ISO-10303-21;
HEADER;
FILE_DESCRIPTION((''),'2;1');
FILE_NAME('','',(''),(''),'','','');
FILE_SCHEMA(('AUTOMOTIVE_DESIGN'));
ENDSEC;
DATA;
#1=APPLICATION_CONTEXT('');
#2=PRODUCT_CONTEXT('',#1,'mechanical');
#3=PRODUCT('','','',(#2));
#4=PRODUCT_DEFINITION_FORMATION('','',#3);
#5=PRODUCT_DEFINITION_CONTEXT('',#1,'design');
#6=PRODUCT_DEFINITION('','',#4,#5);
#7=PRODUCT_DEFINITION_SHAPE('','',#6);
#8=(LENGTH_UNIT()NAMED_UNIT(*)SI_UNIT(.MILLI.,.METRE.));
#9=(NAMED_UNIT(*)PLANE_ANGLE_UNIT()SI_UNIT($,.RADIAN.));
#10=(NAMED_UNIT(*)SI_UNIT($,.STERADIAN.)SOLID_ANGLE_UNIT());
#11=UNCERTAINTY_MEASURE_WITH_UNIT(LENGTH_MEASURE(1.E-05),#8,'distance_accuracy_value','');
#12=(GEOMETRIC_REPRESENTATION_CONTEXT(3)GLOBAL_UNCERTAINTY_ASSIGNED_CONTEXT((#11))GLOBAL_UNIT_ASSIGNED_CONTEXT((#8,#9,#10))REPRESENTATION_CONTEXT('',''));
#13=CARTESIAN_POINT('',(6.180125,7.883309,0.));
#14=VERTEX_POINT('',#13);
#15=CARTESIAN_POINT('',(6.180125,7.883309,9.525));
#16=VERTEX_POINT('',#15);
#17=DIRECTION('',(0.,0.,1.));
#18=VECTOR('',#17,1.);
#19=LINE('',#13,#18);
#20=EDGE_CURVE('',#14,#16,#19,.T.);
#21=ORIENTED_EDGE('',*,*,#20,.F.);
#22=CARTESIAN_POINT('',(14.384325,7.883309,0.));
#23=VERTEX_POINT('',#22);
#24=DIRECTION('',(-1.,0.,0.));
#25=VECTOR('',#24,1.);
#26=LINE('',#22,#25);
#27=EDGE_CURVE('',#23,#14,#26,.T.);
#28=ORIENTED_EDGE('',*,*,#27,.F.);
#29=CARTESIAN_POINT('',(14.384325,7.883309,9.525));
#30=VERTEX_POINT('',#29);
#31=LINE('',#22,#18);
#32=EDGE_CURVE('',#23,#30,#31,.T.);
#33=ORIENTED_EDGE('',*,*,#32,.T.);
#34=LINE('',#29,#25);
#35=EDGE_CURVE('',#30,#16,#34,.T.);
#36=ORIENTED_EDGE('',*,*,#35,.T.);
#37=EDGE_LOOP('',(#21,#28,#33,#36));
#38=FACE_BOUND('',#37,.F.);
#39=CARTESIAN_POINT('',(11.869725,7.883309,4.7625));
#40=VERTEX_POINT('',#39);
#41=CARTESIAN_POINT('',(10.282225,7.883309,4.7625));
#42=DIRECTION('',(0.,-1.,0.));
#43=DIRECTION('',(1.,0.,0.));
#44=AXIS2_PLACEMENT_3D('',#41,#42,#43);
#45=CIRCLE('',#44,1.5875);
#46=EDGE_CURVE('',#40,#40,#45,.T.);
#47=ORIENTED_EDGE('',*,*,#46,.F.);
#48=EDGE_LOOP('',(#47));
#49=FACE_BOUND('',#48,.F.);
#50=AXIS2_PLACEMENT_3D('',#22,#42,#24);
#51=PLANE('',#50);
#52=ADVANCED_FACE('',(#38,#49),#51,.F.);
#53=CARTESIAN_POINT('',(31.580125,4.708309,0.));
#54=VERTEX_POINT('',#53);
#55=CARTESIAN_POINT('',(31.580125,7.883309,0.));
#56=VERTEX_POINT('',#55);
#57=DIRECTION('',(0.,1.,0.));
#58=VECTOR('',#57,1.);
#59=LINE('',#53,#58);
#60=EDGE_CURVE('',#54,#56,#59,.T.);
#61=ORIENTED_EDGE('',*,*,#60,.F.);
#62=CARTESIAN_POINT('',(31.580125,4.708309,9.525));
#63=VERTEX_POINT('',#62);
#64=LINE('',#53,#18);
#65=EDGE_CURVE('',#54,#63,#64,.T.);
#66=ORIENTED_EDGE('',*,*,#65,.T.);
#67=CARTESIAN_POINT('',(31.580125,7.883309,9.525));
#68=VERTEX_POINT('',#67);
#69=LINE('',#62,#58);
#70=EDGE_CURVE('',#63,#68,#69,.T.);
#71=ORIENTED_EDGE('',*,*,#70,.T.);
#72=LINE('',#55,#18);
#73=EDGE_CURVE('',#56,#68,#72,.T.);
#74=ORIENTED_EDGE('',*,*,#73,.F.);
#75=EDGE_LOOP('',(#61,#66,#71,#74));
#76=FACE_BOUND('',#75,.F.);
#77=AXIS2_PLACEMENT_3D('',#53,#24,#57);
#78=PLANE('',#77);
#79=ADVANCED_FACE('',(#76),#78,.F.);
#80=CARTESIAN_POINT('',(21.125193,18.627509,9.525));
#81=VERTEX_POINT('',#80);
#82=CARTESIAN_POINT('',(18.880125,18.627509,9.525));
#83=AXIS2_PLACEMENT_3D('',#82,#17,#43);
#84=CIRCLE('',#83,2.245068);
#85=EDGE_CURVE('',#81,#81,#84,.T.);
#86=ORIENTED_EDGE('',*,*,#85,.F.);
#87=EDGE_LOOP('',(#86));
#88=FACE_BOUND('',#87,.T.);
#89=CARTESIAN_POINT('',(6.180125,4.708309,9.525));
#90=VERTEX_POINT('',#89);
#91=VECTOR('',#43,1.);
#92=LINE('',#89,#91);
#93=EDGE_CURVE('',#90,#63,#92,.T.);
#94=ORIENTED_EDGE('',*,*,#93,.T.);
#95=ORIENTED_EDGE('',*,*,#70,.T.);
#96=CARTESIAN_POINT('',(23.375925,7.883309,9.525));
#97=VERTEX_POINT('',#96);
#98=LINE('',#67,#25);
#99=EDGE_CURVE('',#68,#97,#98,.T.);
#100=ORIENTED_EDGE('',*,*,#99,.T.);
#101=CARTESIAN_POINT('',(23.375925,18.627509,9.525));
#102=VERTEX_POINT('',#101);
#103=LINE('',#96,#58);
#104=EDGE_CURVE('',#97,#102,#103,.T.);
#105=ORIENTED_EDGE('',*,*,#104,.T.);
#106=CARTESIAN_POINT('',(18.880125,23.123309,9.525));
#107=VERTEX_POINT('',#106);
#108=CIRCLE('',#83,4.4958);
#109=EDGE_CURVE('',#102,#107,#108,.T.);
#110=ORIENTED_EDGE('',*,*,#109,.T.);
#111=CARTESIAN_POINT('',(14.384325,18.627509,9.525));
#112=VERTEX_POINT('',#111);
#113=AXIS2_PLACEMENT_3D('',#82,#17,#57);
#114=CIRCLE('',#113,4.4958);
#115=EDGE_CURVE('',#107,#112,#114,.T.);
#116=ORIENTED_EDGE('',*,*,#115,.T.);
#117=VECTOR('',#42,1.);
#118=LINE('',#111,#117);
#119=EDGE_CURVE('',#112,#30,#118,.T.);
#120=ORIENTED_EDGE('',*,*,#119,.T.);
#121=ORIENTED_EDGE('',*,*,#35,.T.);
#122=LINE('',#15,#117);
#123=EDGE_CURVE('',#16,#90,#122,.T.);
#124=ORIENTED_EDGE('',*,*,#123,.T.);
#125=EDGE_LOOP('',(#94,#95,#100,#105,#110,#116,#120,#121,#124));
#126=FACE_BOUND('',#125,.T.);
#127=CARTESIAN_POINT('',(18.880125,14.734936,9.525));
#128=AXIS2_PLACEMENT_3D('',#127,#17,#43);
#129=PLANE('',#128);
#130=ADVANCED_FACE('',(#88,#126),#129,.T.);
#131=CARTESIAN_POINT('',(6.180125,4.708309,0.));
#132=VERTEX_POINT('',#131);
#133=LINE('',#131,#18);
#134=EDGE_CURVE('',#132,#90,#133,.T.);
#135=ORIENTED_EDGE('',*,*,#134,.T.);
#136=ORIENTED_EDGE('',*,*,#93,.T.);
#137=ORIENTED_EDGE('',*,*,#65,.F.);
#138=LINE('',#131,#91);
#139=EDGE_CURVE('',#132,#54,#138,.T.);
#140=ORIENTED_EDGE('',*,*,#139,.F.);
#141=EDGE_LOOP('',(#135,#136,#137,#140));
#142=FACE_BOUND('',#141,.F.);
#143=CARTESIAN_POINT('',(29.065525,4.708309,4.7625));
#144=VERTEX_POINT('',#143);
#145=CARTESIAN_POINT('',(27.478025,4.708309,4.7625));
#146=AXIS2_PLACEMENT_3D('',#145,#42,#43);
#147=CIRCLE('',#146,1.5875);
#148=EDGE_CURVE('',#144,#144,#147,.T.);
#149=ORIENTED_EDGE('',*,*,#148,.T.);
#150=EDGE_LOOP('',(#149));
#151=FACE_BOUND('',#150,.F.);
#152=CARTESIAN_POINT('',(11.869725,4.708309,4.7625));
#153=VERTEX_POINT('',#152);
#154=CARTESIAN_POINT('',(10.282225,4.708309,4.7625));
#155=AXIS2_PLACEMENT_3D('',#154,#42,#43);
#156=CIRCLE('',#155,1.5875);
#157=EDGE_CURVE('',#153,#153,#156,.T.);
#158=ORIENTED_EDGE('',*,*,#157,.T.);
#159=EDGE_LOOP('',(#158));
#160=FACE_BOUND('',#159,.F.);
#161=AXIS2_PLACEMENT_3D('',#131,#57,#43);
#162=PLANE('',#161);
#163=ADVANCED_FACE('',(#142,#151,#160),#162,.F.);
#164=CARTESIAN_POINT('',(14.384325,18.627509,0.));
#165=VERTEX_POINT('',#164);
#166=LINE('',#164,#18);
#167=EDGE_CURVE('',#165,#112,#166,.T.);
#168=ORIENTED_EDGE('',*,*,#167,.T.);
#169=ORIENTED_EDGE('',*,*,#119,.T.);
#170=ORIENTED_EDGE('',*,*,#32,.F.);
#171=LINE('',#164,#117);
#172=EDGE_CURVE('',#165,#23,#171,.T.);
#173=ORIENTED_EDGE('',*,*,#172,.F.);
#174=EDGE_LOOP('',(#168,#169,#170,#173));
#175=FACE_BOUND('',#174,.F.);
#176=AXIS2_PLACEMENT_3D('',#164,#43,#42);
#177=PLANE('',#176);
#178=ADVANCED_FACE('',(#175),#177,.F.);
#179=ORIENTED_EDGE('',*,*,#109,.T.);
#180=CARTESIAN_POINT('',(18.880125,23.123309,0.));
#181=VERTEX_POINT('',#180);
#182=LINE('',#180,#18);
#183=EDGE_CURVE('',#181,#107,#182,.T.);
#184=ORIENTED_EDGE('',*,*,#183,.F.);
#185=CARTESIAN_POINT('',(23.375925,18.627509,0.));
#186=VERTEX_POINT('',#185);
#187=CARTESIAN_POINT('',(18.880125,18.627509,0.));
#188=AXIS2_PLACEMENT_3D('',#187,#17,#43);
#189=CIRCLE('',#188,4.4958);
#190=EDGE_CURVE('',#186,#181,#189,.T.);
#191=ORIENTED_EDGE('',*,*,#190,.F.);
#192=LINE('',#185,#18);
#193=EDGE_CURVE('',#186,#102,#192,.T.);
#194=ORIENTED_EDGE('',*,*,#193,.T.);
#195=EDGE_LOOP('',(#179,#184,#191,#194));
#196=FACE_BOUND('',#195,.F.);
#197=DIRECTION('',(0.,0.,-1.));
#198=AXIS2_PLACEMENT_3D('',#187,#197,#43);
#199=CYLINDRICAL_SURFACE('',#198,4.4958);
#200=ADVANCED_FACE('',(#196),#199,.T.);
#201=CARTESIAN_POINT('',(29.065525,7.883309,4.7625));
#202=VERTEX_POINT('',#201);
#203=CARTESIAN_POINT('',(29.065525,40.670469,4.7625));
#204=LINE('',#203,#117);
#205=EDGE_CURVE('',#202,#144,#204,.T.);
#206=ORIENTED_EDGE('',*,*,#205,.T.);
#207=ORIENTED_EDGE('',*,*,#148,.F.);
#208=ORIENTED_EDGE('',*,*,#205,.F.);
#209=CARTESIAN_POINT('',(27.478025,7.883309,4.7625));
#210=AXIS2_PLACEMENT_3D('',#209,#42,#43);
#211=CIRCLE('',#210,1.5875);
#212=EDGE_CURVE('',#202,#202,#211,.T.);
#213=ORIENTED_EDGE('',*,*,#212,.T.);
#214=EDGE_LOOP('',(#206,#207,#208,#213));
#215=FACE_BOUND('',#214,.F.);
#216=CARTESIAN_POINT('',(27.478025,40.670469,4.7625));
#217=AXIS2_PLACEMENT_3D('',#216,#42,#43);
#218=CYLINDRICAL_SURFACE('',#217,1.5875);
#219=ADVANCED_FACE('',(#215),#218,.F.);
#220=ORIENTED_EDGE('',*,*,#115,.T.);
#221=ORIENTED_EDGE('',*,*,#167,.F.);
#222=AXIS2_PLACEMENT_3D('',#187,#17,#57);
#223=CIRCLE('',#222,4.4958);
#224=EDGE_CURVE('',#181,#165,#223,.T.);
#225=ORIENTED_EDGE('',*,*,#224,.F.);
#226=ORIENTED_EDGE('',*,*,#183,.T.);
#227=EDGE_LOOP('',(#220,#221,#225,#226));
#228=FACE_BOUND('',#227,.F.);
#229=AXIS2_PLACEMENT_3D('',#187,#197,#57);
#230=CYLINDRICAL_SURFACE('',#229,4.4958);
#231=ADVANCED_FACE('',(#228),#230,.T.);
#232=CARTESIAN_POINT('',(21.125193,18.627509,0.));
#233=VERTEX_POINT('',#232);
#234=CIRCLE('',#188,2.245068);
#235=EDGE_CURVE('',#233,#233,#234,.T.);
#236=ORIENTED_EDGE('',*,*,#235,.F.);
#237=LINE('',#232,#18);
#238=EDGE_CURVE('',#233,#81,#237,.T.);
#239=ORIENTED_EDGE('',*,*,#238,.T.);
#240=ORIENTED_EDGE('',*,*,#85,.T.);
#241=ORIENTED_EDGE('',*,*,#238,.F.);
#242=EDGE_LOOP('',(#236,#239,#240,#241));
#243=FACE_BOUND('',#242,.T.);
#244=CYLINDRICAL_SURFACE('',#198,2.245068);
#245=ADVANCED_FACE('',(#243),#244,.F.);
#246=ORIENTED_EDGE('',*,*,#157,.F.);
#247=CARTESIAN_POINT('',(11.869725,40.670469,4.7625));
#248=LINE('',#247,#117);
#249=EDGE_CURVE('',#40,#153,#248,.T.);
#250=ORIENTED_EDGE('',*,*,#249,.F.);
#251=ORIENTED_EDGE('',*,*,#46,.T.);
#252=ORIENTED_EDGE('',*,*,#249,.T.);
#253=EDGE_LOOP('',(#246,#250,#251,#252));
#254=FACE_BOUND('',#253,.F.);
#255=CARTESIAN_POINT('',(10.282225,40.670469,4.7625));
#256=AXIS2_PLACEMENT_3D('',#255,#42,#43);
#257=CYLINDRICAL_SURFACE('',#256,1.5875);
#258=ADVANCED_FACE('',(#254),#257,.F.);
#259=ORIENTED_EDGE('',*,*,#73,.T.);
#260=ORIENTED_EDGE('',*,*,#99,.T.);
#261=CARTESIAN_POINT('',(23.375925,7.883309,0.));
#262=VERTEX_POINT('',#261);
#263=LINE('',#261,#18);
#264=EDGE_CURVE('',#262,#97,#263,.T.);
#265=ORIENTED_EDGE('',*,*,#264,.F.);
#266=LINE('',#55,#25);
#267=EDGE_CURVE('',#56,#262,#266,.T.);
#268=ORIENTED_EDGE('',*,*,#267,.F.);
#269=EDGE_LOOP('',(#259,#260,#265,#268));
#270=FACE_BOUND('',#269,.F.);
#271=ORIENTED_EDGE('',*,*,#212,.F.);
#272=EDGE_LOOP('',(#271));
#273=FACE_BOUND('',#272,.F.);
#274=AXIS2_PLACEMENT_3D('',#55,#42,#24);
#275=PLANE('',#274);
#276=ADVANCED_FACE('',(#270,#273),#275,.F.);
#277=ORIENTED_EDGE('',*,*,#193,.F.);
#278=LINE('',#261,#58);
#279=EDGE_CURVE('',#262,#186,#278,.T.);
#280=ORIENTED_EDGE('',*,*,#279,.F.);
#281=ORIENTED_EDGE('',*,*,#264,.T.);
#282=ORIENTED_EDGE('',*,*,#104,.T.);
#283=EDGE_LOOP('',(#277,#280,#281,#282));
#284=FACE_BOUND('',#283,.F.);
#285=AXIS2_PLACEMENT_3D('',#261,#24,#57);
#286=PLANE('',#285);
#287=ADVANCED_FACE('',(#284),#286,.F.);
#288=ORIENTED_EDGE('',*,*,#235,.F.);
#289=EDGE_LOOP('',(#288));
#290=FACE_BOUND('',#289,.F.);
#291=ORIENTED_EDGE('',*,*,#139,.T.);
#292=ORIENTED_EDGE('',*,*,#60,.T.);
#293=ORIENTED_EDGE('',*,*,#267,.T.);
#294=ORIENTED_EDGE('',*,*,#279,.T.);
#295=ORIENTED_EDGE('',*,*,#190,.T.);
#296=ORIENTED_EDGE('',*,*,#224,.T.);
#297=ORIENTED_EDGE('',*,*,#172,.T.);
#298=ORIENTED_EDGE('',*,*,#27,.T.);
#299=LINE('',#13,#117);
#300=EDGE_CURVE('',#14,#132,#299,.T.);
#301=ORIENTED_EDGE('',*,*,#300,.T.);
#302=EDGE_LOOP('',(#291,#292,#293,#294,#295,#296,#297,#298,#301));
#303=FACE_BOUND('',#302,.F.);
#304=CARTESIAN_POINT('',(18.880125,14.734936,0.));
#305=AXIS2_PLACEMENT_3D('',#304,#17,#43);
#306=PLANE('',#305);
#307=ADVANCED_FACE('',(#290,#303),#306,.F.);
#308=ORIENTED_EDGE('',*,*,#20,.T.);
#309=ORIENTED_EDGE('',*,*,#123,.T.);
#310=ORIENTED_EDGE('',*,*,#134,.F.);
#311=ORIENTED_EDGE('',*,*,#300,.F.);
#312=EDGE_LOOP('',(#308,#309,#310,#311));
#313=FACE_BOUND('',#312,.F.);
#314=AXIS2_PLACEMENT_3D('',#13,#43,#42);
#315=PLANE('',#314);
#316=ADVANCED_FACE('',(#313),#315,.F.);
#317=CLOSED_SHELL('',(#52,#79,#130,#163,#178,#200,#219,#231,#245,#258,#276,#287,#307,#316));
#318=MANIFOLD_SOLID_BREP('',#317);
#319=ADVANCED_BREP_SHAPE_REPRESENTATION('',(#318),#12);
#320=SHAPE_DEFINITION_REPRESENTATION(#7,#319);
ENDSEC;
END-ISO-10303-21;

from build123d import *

# Parameters (mm, degrees)
F0_R     = 2.2450679
F1_DEPTH = 9.525
F3_D     = 3.175
F5_D     = 3.175


# Not quite as in the source:
# - a length typed as a fraction of an inch, garbled in the dataset ("3 / 203.2 mm" for 3/8 in), is restored


with BuildPart() as f1:
    # F0 (on Top) → F1 (new body)
    with BuildSketch(Plane.XY):
        with BuildLine():
            Line((14.3843253767, 18.6275094501), (14.3843253767, 7.8833094501))
            Line((14.3843253767, 7.8833094501), (23.3759253767, 7.8833094501))
            Line((23.3759253767, 7.8833094501), (23.3759253767, 18.6275094501))
            ThreePointArc((23.3759253767, 18.6275094501), (22.0591360436, 21.806520117), (18.8801253767, 23.1233094501))
            ThreePointArc((18.8801253767, 23.1233094501), (15.7011147099, 21.806520117), (14.3843253767, 18.6275094501))
        make_face()
        with Locations((18.8801253767, 18.6275094501)):
            Circle(F0_R, mode=Mode.SUBTRACT)
        Polygon((6.1801253767, 7.8833094501), (6.1801253767, 4.7083094501), (31.5801253767, 4.7083094501), (31.5801253767, 7.8833094501), (23.3759253767, 7.8833094501), (14.3843253767, 7.8833094501), align=None)
    extrude(amount=F1_DEPTH)

    # F3 (through all)
    with Locations(Plane(origin=(0, 7.8833094501, 0), x_dir=(-1, 0, 0), z_dir=(0, 1, 0))):
        with Locations((-27.4780253767, 4.7625)):
            Hole(F3_D / 2)

    # F5 (through all)
    with Locations(Plane(origin=(0, 7.8833094501, 0), x_dir=(-1, 0, 0), z_dir=(0, 1, 0))):
        with Locations((-10.2822253767, 4.7625)):
            Hole(F5_D / 2)


solid = f1.part
